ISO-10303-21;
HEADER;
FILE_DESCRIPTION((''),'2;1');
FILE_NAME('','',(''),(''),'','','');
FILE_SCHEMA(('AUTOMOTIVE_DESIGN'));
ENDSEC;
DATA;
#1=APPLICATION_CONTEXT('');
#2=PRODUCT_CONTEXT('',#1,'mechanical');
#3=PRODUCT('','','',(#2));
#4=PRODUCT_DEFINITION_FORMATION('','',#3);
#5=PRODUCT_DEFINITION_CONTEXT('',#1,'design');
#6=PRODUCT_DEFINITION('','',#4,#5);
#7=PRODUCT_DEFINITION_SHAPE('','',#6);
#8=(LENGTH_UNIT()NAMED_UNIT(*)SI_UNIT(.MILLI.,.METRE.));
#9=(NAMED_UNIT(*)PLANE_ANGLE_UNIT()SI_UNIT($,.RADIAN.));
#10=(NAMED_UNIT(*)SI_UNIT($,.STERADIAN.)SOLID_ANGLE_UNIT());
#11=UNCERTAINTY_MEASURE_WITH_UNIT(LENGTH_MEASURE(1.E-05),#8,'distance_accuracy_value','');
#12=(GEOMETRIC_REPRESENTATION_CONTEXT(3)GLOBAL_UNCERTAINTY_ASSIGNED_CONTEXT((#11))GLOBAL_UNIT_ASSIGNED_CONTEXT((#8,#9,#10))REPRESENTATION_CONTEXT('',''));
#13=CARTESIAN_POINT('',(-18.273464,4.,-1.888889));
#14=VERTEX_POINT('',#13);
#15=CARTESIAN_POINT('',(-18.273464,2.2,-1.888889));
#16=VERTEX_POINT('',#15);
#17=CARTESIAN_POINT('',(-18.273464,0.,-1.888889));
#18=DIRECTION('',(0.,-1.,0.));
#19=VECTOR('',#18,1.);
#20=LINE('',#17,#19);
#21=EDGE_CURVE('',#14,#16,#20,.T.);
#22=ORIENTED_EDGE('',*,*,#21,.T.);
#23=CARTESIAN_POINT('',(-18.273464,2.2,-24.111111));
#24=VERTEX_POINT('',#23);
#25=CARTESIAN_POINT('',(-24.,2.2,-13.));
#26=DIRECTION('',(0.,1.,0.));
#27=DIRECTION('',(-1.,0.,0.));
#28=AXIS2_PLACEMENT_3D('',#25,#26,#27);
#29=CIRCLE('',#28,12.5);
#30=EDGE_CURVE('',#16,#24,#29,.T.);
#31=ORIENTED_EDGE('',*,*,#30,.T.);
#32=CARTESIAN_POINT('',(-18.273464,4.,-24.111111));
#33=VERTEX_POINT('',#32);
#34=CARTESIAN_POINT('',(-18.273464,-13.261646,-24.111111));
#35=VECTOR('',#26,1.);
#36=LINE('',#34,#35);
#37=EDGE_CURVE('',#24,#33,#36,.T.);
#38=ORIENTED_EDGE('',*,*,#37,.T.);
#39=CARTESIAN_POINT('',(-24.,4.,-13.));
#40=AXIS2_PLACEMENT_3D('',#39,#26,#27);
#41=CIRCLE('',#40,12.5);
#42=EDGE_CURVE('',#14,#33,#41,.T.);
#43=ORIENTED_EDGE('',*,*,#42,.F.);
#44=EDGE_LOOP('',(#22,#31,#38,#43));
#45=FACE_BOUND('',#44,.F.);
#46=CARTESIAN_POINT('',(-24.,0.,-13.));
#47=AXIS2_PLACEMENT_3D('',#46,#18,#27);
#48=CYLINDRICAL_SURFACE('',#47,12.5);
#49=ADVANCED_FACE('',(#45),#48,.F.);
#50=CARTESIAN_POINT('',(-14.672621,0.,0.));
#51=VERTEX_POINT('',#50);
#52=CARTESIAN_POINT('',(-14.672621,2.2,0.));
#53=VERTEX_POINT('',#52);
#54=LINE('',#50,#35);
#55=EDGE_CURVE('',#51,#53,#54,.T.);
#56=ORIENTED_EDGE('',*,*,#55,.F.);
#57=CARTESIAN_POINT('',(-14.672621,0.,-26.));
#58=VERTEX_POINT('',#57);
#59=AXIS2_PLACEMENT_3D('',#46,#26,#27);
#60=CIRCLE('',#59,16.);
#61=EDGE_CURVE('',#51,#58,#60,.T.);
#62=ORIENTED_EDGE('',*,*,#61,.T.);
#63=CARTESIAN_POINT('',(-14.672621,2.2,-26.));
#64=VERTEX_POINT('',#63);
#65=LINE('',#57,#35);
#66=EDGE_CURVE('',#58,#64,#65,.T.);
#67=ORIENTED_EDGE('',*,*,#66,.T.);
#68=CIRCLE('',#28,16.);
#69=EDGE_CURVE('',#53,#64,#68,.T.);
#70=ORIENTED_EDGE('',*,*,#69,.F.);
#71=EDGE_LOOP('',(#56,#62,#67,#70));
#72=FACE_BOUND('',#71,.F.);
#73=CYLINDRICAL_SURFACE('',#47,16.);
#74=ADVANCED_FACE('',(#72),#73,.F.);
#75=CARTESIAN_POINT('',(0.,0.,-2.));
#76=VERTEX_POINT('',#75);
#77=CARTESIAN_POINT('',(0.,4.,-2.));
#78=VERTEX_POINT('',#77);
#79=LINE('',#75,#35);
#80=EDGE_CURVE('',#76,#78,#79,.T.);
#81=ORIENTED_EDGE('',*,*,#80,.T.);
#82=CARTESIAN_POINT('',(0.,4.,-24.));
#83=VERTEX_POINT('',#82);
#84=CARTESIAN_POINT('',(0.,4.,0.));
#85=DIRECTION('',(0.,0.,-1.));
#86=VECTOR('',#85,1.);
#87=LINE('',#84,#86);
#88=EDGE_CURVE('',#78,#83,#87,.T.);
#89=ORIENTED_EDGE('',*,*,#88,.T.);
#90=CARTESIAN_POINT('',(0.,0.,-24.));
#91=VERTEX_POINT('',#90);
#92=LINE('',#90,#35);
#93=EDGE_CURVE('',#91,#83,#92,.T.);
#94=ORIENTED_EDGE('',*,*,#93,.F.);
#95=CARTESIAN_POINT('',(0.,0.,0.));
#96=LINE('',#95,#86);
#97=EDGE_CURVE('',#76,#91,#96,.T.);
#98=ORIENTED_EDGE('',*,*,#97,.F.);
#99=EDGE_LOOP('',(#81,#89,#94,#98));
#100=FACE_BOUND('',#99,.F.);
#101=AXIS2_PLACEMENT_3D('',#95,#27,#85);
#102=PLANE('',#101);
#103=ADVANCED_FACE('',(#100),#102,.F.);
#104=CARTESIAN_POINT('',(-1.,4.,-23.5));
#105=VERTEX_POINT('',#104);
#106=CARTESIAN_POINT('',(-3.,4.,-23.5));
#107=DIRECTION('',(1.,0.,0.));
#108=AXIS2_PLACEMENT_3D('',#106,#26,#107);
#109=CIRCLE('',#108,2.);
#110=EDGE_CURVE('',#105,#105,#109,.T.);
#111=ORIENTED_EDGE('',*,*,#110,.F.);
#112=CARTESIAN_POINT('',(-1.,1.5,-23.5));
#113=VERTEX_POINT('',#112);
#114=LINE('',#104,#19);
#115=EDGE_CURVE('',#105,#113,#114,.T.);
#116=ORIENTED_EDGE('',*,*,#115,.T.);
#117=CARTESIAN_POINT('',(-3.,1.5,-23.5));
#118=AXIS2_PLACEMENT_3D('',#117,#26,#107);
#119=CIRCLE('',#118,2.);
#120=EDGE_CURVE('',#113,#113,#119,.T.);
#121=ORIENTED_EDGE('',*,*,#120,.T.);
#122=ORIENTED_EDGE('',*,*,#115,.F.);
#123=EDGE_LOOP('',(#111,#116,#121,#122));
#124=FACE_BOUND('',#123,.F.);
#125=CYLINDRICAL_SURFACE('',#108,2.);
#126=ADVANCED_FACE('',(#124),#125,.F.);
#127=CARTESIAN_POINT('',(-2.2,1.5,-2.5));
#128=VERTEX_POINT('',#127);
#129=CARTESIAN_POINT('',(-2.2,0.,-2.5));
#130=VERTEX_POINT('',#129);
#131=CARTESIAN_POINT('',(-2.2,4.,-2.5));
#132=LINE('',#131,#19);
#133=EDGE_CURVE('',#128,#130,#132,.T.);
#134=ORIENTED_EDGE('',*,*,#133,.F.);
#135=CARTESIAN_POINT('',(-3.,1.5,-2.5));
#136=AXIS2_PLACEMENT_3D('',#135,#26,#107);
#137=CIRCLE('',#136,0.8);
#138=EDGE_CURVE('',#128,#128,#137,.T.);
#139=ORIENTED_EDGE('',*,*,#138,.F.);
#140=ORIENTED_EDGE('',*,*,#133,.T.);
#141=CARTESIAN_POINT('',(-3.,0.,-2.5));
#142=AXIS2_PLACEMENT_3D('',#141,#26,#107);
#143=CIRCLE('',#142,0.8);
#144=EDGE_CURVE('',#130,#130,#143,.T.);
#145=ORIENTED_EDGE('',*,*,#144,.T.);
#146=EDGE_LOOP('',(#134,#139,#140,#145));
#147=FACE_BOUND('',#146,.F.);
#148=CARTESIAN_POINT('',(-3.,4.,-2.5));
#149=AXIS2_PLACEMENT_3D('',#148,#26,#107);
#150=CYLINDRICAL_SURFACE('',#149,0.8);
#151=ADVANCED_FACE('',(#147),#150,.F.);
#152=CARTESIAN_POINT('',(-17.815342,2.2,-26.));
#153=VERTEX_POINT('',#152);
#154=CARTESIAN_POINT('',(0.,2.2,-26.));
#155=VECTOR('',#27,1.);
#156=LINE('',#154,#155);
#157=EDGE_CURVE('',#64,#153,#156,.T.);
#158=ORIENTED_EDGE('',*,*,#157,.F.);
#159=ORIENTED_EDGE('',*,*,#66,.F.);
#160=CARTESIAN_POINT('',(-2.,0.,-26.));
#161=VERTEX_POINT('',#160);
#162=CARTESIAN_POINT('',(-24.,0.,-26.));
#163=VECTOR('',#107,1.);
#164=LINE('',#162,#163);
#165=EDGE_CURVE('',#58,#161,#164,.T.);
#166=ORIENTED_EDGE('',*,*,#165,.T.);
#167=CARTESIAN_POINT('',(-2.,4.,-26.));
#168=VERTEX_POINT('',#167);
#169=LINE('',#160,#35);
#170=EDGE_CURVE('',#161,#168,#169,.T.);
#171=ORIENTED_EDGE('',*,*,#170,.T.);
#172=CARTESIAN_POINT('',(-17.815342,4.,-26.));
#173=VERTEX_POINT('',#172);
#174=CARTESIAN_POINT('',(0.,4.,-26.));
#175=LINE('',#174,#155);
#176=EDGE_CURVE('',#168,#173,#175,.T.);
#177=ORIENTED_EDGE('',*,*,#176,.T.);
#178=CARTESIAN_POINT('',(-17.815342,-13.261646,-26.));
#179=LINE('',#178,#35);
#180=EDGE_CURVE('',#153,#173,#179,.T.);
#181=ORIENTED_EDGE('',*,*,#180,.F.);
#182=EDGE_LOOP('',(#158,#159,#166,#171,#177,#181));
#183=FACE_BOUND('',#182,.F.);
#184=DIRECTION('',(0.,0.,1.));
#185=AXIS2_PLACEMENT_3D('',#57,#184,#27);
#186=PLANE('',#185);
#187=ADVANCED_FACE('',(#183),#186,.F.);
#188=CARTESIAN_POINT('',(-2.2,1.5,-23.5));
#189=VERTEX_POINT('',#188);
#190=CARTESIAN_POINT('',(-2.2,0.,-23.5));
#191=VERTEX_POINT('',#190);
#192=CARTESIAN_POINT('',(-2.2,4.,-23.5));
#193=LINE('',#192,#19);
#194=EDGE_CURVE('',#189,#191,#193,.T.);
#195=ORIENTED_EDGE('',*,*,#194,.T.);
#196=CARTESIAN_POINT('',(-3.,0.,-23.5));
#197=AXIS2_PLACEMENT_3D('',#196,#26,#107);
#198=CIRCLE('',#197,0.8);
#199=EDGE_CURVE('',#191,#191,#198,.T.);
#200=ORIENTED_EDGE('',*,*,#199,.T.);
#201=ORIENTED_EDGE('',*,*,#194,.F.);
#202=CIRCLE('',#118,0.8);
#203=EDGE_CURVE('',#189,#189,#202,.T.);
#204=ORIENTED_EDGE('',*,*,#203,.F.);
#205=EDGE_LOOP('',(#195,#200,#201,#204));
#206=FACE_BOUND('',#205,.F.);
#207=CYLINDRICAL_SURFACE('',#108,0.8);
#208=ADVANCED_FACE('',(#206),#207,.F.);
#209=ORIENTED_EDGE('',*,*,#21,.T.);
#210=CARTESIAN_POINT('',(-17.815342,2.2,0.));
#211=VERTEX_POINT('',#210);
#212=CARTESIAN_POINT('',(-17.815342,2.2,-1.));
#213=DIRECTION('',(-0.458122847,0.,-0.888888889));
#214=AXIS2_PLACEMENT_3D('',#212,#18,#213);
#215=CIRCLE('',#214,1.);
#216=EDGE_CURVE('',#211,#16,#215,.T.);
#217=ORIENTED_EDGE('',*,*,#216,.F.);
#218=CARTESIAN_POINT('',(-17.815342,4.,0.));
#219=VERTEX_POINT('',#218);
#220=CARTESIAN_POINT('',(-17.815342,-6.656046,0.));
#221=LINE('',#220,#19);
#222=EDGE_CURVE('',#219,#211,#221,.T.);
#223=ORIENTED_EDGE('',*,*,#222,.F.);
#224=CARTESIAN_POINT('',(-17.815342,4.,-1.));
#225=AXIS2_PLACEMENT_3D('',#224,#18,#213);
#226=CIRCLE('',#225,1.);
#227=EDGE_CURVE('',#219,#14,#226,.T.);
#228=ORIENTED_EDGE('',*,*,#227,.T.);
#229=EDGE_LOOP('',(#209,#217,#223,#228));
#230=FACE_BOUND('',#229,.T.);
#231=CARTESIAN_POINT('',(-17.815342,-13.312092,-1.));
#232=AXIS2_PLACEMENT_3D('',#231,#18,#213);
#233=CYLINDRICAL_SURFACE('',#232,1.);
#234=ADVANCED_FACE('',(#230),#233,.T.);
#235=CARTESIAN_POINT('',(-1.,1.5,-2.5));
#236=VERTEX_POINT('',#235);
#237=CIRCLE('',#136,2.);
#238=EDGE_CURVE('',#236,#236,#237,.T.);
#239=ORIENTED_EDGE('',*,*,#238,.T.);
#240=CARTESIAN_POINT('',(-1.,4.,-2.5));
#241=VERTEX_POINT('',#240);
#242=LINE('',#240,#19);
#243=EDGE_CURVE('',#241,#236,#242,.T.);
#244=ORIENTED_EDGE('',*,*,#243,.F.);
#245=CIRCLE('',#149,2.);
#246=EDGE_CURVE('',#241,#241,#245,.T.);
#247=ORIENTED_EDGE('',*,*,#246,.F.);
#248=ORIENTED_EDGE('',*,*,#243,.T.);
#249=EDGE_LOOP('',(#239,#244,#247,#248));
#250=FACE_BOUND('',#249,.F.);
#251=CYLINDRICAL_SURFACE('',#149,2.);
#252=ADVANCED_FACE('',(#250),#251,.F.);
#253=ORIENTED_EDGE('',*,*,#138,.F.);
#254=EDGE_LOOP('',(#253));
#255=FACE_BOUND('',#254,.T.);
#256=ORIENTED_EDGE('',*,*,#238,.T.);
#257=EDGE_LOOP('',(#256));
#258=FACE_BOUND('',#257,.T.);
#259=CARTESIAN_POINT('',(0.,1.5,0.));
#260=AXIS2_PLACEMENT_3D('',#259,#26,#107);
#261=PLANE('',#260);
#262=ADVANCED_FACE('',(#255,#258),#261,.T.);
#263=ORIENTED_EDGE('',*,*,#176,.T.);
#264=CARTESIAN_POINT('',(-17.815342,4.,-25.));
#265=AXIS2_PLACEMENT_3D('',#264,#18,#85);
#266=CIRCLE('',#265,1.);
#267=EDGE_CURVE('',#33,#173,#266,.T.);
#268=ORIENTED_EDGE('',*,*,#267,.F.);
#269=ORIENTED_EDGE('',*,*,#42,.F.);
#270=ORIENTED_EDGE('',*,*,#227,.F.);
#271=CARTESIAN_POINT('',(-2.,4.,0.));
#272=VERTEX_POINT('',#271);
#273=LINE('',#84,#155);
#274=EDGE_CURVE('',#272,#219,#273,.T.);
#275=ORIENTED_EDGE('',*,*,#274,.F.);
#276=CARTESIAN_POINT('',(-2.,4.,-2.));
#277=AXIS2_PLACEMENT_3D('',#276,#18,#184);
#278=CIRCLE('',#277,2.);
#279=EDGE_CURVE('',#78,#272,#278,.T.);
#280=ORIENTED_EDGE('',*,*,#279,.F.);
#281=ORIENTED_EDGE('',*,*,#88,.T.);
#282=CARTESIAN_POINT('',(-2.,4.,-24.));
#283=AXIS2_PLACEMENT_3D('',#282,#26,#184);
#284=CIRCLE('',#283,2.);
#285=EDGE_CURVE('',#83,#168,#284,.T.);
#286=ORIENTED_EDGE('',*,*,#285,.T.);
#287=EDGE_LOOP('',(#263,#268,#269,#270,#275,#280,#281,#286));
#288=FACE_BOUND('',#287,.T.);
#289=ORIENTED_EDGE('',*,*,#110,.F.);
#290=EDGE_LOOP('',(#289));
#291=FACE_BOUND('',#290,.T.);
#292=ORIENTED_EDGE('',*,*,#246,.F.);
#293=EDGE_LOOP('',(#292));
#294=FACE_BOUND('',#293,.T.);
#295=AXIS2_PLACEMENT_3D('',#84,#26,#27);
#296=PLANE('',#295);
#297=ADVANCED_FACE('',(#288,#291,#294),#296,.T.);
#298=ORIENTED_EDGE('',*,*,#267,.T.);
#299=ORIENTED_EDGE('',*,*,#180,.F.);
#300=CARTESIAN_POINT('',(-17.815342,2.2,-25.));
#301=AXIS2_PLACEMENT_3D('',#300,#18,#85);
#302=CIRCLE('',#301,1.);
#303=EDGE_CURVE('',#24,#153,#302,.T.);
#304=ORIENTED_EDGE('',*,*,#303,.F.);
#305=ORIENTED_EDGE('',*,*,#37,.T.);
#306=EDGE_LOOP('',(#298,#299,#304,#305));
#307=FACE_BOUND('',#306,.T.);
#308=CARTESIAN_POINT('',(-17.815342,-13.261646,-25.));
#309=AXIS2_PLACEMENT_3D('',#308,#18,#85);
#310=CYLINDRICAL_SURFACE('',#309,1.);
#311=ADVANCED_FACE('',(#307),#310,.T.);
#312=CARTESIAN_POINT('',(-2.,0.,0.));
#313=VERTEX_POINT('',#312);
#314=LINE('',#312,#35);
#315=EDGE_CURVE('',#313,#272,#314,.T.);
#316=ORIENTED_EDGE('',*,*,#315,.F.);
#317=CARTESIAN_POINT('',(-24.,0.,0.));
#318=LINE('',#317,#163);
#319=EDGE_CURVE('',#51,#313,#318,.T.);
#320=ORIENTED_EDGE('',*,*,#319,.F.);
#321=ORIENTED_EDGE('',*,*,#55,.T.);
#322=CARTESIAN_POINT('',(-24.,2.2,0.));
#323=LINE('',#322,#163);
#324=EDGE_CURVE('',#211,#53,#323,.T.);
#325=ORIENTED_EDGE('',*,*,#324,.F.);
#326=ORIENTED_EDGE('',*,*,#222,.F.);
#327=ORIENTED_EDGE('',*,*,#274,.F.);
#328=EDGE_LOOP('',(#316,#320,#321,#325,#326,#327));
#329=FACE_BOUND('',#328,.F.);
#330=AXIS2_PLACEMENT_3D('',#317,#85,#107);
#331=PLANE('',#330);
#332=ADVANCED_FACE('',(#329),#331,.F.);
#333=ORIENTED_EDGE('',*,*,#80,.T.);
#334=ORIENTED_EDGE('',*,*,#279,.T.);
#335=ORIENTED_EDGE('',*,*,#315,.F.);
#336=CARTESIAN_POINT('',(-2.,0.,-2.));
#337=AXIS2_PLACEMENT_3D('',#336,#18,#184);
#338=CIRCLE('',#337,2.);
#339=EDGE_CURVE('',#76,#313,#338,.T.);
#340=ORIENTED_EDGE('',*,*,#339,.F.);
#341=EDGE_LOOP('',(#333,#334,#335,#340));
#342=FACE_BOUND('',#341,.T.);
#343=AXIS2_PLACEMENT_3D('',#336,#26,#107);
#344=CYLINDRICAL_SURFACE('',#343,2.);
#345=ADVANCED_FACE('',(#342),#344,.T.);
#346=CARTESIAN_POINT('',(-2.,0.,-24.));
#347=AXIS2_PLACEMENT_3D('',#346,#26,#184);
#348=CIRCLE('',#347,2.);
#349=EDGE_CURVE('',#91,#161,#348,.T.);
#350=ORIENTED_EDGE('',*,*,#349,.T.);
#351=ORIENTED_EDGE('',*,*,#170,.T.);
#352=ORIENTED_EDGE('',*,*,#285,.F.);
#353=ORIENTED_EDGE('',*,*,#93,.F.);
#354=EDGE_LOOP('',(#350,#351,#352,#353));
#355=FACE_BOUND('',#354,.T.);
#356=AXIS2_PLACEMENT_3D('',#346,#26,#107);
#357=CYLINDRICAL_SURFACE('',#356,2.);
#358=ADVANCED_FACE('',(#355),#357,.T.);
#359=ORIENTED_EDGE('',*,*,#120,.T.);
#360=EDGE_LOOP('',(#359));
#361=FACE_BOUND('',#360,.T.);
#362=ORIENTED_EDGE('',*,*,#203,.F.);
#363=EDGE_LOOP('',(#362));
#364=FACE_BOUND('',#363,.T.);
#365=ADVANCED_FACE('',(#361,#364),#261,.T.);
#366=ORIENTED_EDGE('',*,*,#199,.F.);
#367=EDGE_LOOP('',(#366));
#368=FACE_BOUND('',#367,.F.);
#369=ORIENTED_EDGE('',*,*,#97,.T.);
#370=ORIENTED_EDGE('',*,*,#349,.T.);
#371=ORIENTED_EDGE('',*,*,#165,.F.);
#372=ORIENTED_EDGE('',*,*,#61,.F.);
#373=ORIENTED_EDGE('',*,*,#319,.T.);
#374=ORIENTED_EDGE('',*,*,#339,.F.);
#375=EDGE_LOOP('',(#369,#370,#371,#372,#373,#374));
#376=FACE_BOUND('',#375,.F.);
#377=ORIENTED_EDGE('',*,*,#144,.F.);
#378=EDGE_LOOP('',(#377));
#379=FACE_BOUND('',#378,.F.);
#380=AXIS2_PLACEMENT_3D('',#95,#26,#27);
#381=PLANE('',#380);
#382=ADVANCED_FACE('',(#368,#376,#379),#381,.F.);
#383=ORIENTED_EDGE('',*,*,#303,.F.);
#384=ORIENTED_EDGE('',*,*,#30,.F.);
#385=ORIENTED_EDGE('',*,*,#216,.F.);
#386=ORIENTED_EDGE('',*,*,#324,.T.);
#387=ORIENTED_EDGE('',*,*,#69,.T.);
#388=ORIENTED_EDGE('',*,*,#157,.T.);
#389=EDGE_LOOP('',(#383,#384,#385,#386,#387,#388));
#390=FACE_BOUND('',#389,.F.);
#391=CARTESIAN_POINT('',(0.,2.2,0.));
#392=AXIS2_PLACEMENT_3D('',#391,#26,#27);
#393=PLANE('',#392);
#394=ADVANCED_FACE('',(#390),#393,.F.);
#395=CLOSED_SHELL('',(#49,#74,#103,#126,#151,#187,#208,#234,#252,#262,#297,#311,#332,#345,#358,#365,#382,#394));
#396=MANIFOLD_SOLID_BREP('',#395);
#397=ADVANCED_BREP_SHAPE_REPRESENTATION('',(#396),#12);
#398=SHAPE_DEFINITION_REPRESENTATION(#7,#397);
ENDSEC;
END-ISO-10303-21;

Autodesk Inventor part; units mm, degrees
ref_plane "YZ Plane" through (0, 0, 0) normal (1, 0, 0) x (0, 1, 0)
ref_plane "XZ Plane" through (0, 0, 0) normal (0, 1, 0) x (-1, 0, 0)
ref_plane "XY Plane" through (0, 0, 0) normal (0, 0, 1) x (1, 0, 0)
sketch "スケッチ1" plane through (0, 0, 0) normal (0, 1, 0) x (-1, 0, 0)
  line L0 (24, 0) -> (0, 0)
  line L1 (0, 0) -> (0, -26)
  line L2 (0, -26) -> (24, -26)
  line L3 (24, -26) -> (24, 0)
  circle A0 centre (24, -13) radius 13 construction
  circle A1 centre (24, -13) radius 12.5
  circle A2 centre (24, -13) radius 16
  point P0 (24, -25.5)
  point P1 (24, -0.5)
  point P2 (14.6726, 0)
  point P3 (14.6726, -26)
  dimension "d0" = 26
  dimension "d1" = 24
  dimension "d2" = 25
  dimension "d3" = 32
extrude "押し出し1" add sketch "スケッチ1" along normal blind 4 contours L3 A1 L2 A2 L0 | A2 L2 L1 L0 picked at (14.0879, -23.9339)
extrude "押し出し2" cut sketch "スケッチ1" along normal blind 2.2 contours L3 A1 L2 A2 L0 picked at (14.0879, -23.9339)
fillet "フィレット1" radius 1 4 edges at (-24, 3.1, -0.5) (-24, 3.1, 0) (-24, 3.1, -26) (-24, 3.1, -25.5)
sketch "スケッチ2" plane through (0, 4, 0) normal (0, 1, 0) x (1, 0, 0)
  circle A0 centre (-3, 2.5) radius 0.85 construction
  circle A1 centre (-3, 23.5) radius 0.85 construction
  circle A2 centre (-3, 2.5) radius 0.8
  circle A3 centre (-3, 23.5) radius 0.8
  point P0 (0, 0)
  dimension "d9" = 1.6
  dimension "d10" = 1.6
extrude "押し出し3" cut sketch "スケッチ2" against normal through all
sketch "スケッチ3" plane through (0, 4, 0) normal (0, 1, 0) x (1, 0, 0)
  circle A0 centre (-3, 2.5) radius 0.8 projected
  circle A1 centre (-3, 23.5) radius 0.8 projected
  circle A2 centre (-3, 2.5) radius 2
  circle A3 centre (-3, 23.5) radius 2
  point P0 (0, 0)
  dimension "d13" = 4
  dimension "d14" = 4
extrude "押し出し4" cut sketch "スケッチ3" against normal blind 2.5 contours A0 | A1 | A2 | A3
fillet "フィレット2" radius 2 2 edges at (0, 2, 0) (0, 2, -26)
properties part number "sholder_joint_cover"
